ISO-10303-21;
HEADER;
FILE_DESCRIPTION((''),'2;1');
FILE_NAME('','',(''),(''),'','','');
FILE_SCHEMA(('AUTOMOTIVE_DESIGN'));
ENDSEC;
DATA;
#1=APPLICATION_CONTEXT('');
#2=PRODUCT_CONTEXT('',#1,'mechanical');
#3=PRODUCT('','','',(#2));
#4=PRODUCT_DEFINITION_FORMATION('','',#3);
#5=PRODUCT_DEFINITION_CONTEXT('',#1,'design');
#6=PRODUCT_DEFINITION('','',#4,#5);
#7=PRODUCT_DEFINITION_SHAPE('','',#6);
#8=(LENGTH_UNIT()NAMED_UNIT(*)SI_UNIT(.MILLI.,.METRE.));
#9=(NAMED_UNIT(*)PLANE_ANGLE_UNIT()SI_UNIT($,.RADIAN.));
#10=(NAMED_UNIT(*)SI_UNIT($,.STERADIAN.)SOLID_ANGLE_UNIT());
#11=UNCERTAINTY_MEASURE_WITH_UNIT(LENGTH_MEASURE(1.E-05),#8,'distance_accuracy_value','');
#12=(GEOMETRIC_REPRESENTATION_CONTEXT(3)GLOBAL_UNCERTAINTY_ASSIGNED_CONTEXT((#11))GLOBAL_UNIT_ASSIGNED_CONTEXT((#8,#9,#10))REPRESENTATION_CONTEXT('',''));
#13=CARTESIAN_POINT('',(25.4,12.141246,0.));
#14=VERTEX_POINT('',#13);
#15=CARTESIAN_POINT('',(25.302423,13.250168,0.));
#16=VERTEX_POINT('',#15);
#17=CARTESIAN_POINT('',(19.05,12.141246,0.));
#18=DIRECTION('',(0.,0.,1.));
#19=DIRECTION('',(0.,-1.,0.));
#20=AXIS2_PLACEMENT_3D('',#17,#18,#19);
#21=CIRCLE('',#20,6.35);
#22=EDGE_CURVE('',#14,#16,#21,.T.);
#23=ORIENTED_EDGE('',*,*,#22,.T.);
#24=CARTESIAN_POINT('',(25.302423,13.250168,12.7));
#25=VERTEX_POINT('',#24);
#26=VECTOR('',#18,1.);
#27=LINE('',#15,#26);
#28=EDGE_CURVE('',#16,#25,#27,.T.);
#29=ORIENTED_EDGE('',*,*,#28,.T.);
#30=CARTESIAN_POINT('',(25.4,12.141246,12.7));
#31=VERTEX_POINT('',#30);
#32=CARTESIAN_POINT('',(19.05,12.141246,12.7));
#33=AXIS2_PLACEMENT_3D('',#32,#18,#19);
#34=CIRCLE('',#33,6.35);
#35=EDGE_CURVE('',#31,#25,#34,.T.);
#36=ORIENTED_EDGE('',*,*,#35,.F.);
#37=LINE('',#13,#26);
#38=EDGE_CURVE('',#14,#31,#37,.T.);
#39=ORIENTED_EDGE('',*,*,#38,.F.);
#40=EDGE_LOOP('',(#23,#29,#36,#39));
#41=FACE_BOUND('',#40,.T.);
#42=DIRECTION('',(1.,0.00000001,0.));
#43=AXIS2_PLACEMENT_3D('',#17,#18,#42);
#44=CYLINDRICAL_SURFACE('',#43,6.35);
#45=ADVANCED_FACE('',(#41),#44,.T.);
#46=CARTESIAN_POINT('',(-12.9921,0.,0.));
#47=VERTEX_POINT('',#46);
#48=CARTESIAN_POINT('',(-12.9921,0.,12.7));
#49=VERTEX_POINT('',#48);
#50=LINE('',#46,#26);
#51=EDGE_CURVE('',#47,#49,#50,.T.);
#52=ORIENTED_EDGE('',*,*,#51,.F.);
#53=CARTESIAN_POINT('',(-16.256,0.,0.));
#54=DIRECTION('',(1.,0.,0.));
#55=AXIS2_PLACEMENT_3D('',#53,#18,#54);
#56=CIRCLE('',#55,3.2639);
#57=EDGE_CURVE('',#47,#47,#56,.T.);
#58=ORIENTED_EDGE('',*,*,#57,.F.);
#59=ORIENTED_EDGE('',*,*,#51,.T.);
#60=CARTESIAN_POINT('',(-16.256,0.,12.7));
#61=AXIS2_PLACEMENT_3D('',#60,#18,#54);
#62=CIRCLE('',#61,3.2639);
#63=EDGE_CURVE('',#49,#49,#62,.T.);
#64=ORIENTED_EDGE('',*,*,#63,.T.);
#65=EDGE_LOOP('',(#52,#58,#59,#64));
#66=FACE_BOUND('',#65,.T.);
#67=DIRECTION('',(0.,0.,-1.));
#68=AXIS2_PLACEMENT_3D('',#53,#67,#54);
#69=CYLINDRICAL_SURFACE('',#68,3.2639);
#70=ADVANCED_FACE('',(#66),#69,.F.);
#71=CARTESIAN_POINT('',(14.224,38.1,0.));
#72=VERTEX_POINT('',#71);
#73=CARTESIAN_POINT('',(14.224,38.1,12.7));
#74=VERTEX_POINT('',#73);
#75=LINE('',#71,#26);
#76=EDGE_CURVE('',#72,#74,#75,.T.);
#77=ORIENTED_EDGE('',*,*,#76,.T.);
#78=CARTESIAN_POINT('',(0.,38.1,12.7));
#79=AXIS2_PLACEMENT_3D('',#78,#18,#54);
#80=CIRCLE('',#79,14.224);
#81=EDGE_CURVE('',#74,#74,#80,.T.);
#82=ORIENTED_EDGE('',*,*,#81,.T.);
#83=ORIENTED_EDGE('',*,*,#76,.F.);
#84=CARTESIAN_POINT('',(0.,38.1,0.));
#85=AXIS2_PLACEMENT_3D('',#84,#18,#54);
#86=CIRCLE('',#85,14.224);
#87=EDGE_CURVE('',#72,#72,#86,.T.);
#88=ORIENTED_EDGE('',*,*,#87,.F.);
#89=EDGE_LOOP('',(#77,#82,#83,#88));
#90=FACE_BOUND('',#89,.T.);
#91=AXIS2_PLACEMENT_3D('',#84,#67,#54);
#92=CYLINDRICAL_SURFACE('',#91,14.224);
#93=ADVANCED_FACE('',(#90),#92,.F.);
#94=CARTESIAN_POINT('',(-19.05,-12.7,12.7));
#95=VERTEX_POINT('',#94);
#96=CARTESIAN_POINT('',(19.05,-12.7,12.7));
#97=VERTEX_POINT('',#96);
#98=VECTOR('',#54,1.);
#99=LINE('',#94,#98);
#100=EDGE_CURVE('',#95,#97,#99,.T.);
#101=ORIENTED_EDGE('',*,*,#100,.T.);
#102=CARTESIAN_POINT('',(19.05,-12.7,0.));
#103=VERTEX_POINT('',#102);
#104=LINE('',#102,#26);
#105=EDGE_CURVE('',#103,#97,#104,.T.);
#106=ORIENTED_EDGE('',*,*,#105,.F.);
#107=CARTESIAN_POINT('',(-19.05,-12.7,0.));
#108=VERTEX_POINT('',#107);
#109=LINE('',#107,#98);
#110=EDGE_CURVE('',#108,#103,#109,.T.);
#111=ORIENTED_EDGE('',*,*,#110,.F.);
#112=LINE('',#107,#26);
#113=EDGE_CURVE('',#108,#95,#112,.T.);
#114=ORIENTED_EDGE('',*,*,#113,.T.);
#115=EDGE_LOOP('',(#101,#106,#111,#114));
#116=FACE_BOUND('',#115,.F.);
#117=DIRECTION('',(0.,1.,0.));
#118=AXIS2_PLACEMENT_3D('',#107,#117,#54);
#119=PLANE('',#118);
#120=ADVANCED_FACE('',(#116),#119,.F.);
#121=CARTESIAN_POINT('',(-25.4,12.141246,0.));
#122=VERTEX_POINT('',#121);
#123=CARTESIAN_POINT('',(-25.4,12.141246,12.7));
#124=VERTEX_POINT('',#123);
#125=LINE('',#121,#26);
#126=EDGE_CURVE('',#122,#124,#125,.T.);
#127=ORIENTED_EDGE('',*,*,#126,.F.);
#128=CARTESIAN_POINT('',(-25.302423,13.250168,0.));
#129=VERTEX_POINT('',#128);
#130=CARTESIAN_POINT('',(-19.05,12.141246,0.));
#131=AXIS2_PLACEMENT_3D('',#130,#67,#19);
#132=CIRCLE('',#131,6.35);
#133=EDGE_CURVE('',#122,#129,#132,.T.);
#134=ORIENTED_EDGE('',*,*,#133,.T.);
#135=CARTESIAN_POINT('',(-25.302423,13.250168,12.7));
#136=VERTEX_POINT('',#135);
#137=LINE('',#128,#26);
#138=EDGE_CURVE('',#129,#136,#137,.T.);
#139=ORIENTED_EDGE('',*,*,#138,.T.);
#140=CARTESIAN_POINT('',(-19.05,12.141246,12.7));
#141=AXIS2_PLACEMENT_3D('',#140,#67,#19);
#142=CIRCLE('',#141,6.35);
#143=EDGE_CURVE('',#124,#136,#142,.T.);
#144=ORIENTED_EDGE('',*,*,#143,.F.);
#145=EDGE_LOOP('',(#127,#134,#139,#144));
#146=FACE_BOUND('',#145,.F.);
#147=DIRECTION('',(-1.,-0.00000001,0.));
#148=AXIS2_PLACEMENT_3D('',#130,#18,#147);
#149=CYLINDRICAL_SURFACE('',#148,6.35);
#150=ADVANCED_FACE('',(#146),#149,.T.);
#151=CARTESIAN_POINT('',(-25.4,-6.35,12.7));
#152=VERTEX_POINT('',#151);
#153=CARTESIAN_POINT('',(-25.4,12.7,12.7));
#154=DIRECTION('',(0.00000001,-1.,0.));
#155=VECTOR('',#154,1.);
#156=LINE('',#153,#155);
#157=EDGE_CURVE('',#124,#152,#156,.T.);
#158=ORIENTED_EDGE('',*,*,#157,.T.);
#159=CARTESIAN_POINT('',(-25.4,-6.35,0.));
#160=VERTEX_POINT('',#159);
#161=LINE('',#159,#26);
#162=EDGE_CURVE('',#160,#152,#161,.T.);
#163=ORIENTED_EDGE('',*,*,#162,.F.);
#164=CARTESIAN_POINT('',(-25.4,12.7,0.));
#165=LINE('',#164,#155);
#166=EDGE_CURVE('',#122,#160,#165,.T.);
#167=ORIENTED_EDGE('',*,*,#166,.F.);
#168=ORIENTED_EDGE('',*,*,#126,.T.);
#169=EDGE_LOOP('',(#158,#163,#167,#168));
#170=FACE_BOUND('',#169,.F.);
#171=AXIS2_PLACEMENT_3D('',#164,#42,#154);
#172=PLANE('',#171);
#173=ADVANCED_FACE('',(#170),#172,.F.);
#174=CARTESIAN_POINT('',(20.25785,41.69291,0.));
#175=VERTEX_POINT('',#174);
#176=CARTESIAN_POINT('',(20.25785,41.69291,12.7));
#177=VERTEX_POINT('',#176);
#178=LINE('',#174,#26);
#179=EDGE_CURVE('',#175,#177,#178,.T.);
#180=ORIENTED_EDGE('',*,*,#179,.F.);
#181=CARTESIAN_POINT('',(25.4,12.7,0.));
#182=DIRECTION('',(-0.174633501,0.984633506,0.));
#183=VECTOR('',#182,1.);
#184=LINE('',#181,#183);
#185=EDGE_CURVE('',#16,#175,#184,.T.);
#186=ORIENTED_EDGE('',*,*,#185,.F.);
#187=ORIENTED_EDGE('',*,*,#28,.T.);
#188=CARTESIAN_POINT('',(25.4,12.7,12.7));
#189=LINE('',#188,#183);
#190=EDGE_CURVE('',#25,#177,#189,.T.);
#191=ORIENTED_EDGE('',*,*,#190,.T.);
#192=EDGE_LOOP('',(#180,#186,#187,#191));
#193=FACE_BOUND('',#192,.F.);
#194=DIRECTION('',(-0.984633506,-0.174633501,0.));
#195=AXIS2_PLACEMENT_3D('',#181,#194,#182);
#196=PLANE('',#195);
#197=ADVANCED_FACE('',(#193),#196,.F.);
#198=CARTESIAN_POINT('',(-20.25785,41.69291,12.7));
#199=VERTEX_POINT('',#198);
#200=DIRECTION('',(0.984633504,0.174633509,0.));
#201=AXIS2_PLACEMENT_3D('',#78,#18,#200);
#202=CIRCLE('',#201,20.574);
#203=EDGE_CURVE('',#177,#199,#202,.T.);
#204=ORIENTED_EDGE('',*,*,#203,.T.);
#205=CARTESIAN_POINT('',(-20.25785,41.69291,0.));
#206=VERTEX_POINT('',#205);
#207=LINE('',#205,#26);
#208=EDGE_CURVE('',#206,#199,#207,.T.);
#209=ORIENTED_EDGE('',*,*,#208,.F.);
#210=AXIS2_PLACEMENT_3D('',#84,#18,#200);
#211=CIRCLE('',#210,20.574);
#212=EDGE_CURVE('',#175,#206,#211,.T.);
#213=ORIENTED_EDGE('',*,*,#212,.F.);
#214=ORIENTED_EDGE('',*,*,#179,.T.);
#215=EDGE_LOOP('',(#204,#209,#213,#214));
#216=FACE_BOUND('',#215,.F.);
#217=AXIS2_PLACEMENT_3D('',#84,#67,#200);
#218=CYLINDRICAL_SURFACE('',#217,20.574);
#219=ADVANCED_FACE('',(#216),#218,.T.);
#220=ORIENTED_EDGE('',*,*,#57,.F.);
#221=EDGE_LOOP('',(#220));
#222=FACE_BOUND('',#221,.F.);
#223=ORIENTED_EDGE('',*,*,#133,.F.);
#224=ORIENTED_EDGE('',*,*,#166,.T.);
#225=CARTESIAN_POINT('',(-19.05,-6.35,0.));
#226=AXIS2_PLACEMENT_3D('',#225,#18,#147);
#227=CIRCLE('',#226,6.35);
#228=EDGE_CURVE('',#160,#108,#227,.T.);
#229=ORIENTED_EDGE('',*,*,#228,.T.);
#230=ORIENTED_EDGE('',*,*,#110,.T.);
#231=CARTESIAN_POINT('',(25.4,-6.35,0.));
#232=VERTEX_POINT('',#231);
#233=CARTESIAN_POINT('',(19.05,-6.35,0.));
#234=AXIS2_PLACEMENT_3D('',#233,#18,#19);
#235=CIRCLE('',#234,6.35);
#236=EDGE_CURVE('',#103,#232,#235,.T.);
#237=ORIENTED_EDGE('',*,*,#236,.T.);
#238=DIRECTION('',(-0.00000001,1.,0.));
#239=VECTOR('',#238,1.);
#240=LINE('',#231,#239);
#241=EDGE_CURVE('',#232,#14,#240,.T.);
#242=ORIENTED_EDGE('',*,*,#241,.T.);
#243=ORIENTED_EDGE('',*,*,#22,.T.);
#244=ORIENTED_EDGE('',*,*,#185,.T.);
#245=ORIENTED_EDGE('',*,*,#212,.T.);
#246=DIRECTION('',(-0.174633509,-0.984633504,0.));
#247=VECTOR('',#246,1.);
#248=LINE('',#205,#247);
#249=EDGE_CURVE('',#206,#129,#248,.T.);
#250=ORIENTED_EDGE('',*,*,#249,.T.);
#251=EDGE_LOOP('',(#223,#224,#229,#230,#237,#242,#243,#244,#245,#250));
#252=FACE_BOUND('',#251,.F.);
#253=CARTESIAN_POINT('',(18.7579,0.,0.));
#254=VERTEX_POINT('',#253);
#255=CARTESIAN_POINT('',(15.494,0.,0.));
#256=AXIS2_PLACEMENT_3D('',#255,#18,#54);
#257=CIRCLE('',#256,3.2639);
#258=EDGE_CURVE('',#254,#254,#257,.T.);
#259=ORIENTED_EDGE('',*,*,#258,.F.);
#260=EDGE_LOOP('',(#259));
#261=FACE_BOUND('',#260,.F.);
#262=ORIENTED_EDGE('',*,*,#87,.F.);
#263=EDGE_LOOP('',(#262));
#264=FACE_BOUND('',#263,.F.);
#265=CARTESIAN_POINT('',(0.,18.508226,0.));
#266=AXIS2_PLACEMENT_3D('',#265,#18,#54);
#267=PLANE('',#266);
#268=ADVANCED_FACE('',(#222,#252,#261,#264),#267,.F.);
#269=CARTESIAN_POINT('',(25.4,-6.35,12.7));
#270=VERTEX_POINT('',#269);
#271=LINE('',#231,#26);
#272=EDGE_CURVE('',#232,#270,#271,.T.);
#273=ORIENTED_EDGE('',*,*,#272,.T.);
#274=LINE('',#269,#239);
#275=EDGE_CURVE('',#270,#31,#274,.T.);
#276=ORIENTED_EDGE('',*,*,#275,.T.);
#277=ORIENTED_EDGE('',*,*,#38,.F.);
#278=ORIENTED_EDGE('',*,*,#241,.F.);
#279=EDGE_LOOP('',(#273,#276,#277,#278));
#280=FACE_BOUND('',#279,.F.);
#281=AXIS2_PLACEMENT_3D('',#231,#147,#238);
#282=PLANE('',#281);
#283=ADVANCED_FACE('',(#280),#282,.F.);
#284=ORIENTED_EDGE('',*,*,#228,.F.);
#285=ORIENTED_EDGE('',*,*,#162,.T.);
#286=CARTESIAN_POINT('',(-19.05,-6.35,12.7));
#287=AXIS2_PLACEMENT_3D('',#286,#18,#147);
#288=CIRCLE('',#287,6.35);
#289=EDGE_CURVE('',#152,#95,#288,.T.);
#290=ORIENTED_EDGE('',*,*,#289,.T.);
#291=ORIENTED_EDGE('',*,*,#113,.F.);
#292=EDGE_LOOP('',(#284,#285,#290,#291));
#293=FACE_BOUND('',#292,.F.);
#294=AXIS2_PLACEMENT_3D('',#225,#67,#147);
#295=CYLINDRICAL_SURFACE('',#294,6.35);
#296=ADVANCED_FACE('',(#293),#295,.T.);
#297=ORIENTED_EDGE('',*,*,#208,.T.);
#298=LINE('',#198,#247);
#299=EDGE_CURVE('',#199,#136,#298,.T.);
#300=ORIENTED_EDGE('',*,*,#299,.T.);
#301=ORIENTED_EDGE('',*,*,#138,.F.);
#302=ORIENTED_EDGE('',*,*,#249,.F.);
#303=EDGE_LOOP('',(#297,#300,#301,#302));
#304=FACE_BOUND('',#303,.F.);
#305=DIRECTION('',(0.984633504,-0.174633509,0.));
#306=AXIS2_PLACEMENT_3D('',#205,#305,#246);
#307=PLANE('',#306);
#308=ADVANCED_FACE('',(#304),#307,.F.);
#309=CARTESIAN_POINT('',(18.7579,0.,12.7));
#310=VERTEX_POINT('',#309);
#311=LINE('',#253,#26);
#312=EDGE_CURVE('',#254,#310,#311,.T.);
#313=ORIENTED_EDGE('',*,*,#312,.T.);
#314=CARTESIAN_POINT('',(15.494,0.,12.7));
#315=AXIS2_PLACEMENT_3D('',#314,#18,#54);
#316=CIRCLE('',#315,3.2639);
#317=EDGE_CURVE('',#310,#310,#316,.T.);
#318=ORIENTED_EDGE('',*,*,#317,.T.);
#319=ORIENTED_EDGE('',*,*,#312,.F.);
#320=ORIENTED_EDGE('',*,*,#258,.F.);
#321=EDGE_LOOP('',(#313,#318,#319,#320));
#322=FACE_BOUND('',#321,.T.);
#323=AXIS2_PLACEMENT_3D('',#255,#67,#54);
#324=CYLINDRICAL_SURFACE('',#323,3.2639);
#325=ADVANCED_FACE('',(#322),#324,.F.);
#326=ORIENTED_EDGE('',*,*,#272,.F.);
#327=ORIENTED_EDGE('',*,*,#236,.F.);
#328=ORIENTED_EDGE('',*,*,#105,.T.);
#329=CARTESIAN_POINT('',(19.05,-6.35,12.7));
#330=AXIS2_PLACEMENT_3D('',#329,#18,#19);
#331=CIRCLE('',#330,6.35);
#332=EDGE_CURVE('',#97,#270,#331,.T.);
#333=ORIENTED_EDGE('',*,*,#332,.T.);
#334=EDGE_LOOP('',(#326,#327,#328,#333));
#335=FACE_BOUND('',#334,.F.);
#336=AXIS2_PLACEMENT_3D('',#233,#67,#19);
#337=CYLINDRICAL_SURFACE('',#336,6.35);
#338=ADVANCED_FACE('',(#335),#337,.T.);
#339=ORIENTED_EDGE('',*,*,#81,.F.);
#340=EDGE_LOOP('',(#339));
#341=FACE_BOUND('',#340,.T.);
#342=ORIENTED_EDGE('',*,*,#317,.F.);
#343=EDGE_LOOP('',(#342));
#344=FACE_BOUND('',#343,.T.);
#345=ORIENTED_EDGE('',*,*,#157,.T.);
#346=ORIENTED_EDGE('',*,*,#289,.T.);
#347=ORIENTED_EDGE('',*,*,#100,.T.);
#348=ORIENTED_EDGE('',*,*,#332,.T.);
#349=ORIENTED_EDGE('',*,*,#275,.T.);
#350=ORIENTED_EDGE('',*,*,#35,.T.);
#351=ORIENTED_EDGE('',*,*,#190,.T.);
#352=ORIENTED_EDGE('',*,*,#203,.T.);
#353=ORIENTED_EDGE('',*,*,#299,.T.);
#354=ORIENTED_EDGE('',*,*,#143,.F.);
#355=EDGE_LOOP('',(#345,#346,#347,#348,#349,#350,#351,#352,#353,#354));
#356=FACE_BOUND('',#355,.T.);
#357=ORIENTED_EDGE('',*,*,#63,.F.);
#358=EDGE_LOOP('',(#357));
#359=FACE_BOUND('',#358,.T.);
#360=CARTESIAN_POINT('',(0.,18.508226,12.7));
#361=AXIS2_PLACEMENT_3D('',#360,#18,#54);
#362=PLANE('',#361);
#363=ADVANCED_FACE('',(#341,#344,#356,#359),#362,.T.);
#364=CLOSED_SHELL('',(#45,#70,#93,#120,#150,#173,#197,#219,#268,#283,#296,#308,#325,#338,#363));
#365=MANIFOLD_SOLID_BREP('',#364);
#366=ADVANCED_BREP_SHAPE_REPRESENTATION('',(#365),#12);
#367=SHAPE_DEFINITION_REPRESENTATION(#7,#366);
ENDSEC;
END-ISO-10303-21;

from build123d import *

# Parameters (mm, degrees)
F0_R     = 3.2639
F0_R_2   = 14.224
F1_DEPTH = 12.7
F2_R     = 6.35


# Not quite as in the source:
# - ends of sketch curves that miss each other by under 0.0002 mm in the source are joined


with BuildPart() as f1:
    # F0 (on Top) → F1 (new body)
    with BuildSketch(Plane.XY):
        with BuildLine():
            Line((-19.0499999385, -12.7), (19.0500000615, -12.7))
            ThreePointArc((19.0500000615, -12.7), (23.5401281437, -10.8401280388), (25.4000000615, -6.3499999385))
            Line((25.4000000615, -6.3499999385), (25.3999998771, 12.7))
            Line((25.3999998771, 12.7), (20.257849715, 41.692909813))
            ThreePointArc((20.257849715, 41.692909813), (0, 58.674), (-20.257849715, 41.692909813))
            Line((-20.257849715, 41.692909813), (-25.4000001229, 12.7))
            Line((-25.4000001229, 12.7), (-25.3999999385, -6.3500000615))
            ThreePointArc((-25.3999999385, -6.3500000615), (-23.5401279774, -10.8401280823), (-19.0499999385, -12.7))
        make_face()
        with Locations((-16.256, 0)):
            Circle(F0_R, mode=Mode.SUBTRACT)
        with Locations((15.494, 0)):
            Circle(F0_R, mode=Mode.SUBTRACT)
        with Locations((0, 38.1)):
            Circle(F0_R_2, mode=Mode.SUBTRACT)
    extrude(amount=F1_DEPTH)

    # F2
    f2_edges = [f1.edges().sort_by_distance(p)[0] for p in [
        (25.4, 12.7, 6.35),
        (-25.4, 12.7, 6.35),
    ]]
    fillet(f2_edges, radius=F2_R)


solid = f1.part
